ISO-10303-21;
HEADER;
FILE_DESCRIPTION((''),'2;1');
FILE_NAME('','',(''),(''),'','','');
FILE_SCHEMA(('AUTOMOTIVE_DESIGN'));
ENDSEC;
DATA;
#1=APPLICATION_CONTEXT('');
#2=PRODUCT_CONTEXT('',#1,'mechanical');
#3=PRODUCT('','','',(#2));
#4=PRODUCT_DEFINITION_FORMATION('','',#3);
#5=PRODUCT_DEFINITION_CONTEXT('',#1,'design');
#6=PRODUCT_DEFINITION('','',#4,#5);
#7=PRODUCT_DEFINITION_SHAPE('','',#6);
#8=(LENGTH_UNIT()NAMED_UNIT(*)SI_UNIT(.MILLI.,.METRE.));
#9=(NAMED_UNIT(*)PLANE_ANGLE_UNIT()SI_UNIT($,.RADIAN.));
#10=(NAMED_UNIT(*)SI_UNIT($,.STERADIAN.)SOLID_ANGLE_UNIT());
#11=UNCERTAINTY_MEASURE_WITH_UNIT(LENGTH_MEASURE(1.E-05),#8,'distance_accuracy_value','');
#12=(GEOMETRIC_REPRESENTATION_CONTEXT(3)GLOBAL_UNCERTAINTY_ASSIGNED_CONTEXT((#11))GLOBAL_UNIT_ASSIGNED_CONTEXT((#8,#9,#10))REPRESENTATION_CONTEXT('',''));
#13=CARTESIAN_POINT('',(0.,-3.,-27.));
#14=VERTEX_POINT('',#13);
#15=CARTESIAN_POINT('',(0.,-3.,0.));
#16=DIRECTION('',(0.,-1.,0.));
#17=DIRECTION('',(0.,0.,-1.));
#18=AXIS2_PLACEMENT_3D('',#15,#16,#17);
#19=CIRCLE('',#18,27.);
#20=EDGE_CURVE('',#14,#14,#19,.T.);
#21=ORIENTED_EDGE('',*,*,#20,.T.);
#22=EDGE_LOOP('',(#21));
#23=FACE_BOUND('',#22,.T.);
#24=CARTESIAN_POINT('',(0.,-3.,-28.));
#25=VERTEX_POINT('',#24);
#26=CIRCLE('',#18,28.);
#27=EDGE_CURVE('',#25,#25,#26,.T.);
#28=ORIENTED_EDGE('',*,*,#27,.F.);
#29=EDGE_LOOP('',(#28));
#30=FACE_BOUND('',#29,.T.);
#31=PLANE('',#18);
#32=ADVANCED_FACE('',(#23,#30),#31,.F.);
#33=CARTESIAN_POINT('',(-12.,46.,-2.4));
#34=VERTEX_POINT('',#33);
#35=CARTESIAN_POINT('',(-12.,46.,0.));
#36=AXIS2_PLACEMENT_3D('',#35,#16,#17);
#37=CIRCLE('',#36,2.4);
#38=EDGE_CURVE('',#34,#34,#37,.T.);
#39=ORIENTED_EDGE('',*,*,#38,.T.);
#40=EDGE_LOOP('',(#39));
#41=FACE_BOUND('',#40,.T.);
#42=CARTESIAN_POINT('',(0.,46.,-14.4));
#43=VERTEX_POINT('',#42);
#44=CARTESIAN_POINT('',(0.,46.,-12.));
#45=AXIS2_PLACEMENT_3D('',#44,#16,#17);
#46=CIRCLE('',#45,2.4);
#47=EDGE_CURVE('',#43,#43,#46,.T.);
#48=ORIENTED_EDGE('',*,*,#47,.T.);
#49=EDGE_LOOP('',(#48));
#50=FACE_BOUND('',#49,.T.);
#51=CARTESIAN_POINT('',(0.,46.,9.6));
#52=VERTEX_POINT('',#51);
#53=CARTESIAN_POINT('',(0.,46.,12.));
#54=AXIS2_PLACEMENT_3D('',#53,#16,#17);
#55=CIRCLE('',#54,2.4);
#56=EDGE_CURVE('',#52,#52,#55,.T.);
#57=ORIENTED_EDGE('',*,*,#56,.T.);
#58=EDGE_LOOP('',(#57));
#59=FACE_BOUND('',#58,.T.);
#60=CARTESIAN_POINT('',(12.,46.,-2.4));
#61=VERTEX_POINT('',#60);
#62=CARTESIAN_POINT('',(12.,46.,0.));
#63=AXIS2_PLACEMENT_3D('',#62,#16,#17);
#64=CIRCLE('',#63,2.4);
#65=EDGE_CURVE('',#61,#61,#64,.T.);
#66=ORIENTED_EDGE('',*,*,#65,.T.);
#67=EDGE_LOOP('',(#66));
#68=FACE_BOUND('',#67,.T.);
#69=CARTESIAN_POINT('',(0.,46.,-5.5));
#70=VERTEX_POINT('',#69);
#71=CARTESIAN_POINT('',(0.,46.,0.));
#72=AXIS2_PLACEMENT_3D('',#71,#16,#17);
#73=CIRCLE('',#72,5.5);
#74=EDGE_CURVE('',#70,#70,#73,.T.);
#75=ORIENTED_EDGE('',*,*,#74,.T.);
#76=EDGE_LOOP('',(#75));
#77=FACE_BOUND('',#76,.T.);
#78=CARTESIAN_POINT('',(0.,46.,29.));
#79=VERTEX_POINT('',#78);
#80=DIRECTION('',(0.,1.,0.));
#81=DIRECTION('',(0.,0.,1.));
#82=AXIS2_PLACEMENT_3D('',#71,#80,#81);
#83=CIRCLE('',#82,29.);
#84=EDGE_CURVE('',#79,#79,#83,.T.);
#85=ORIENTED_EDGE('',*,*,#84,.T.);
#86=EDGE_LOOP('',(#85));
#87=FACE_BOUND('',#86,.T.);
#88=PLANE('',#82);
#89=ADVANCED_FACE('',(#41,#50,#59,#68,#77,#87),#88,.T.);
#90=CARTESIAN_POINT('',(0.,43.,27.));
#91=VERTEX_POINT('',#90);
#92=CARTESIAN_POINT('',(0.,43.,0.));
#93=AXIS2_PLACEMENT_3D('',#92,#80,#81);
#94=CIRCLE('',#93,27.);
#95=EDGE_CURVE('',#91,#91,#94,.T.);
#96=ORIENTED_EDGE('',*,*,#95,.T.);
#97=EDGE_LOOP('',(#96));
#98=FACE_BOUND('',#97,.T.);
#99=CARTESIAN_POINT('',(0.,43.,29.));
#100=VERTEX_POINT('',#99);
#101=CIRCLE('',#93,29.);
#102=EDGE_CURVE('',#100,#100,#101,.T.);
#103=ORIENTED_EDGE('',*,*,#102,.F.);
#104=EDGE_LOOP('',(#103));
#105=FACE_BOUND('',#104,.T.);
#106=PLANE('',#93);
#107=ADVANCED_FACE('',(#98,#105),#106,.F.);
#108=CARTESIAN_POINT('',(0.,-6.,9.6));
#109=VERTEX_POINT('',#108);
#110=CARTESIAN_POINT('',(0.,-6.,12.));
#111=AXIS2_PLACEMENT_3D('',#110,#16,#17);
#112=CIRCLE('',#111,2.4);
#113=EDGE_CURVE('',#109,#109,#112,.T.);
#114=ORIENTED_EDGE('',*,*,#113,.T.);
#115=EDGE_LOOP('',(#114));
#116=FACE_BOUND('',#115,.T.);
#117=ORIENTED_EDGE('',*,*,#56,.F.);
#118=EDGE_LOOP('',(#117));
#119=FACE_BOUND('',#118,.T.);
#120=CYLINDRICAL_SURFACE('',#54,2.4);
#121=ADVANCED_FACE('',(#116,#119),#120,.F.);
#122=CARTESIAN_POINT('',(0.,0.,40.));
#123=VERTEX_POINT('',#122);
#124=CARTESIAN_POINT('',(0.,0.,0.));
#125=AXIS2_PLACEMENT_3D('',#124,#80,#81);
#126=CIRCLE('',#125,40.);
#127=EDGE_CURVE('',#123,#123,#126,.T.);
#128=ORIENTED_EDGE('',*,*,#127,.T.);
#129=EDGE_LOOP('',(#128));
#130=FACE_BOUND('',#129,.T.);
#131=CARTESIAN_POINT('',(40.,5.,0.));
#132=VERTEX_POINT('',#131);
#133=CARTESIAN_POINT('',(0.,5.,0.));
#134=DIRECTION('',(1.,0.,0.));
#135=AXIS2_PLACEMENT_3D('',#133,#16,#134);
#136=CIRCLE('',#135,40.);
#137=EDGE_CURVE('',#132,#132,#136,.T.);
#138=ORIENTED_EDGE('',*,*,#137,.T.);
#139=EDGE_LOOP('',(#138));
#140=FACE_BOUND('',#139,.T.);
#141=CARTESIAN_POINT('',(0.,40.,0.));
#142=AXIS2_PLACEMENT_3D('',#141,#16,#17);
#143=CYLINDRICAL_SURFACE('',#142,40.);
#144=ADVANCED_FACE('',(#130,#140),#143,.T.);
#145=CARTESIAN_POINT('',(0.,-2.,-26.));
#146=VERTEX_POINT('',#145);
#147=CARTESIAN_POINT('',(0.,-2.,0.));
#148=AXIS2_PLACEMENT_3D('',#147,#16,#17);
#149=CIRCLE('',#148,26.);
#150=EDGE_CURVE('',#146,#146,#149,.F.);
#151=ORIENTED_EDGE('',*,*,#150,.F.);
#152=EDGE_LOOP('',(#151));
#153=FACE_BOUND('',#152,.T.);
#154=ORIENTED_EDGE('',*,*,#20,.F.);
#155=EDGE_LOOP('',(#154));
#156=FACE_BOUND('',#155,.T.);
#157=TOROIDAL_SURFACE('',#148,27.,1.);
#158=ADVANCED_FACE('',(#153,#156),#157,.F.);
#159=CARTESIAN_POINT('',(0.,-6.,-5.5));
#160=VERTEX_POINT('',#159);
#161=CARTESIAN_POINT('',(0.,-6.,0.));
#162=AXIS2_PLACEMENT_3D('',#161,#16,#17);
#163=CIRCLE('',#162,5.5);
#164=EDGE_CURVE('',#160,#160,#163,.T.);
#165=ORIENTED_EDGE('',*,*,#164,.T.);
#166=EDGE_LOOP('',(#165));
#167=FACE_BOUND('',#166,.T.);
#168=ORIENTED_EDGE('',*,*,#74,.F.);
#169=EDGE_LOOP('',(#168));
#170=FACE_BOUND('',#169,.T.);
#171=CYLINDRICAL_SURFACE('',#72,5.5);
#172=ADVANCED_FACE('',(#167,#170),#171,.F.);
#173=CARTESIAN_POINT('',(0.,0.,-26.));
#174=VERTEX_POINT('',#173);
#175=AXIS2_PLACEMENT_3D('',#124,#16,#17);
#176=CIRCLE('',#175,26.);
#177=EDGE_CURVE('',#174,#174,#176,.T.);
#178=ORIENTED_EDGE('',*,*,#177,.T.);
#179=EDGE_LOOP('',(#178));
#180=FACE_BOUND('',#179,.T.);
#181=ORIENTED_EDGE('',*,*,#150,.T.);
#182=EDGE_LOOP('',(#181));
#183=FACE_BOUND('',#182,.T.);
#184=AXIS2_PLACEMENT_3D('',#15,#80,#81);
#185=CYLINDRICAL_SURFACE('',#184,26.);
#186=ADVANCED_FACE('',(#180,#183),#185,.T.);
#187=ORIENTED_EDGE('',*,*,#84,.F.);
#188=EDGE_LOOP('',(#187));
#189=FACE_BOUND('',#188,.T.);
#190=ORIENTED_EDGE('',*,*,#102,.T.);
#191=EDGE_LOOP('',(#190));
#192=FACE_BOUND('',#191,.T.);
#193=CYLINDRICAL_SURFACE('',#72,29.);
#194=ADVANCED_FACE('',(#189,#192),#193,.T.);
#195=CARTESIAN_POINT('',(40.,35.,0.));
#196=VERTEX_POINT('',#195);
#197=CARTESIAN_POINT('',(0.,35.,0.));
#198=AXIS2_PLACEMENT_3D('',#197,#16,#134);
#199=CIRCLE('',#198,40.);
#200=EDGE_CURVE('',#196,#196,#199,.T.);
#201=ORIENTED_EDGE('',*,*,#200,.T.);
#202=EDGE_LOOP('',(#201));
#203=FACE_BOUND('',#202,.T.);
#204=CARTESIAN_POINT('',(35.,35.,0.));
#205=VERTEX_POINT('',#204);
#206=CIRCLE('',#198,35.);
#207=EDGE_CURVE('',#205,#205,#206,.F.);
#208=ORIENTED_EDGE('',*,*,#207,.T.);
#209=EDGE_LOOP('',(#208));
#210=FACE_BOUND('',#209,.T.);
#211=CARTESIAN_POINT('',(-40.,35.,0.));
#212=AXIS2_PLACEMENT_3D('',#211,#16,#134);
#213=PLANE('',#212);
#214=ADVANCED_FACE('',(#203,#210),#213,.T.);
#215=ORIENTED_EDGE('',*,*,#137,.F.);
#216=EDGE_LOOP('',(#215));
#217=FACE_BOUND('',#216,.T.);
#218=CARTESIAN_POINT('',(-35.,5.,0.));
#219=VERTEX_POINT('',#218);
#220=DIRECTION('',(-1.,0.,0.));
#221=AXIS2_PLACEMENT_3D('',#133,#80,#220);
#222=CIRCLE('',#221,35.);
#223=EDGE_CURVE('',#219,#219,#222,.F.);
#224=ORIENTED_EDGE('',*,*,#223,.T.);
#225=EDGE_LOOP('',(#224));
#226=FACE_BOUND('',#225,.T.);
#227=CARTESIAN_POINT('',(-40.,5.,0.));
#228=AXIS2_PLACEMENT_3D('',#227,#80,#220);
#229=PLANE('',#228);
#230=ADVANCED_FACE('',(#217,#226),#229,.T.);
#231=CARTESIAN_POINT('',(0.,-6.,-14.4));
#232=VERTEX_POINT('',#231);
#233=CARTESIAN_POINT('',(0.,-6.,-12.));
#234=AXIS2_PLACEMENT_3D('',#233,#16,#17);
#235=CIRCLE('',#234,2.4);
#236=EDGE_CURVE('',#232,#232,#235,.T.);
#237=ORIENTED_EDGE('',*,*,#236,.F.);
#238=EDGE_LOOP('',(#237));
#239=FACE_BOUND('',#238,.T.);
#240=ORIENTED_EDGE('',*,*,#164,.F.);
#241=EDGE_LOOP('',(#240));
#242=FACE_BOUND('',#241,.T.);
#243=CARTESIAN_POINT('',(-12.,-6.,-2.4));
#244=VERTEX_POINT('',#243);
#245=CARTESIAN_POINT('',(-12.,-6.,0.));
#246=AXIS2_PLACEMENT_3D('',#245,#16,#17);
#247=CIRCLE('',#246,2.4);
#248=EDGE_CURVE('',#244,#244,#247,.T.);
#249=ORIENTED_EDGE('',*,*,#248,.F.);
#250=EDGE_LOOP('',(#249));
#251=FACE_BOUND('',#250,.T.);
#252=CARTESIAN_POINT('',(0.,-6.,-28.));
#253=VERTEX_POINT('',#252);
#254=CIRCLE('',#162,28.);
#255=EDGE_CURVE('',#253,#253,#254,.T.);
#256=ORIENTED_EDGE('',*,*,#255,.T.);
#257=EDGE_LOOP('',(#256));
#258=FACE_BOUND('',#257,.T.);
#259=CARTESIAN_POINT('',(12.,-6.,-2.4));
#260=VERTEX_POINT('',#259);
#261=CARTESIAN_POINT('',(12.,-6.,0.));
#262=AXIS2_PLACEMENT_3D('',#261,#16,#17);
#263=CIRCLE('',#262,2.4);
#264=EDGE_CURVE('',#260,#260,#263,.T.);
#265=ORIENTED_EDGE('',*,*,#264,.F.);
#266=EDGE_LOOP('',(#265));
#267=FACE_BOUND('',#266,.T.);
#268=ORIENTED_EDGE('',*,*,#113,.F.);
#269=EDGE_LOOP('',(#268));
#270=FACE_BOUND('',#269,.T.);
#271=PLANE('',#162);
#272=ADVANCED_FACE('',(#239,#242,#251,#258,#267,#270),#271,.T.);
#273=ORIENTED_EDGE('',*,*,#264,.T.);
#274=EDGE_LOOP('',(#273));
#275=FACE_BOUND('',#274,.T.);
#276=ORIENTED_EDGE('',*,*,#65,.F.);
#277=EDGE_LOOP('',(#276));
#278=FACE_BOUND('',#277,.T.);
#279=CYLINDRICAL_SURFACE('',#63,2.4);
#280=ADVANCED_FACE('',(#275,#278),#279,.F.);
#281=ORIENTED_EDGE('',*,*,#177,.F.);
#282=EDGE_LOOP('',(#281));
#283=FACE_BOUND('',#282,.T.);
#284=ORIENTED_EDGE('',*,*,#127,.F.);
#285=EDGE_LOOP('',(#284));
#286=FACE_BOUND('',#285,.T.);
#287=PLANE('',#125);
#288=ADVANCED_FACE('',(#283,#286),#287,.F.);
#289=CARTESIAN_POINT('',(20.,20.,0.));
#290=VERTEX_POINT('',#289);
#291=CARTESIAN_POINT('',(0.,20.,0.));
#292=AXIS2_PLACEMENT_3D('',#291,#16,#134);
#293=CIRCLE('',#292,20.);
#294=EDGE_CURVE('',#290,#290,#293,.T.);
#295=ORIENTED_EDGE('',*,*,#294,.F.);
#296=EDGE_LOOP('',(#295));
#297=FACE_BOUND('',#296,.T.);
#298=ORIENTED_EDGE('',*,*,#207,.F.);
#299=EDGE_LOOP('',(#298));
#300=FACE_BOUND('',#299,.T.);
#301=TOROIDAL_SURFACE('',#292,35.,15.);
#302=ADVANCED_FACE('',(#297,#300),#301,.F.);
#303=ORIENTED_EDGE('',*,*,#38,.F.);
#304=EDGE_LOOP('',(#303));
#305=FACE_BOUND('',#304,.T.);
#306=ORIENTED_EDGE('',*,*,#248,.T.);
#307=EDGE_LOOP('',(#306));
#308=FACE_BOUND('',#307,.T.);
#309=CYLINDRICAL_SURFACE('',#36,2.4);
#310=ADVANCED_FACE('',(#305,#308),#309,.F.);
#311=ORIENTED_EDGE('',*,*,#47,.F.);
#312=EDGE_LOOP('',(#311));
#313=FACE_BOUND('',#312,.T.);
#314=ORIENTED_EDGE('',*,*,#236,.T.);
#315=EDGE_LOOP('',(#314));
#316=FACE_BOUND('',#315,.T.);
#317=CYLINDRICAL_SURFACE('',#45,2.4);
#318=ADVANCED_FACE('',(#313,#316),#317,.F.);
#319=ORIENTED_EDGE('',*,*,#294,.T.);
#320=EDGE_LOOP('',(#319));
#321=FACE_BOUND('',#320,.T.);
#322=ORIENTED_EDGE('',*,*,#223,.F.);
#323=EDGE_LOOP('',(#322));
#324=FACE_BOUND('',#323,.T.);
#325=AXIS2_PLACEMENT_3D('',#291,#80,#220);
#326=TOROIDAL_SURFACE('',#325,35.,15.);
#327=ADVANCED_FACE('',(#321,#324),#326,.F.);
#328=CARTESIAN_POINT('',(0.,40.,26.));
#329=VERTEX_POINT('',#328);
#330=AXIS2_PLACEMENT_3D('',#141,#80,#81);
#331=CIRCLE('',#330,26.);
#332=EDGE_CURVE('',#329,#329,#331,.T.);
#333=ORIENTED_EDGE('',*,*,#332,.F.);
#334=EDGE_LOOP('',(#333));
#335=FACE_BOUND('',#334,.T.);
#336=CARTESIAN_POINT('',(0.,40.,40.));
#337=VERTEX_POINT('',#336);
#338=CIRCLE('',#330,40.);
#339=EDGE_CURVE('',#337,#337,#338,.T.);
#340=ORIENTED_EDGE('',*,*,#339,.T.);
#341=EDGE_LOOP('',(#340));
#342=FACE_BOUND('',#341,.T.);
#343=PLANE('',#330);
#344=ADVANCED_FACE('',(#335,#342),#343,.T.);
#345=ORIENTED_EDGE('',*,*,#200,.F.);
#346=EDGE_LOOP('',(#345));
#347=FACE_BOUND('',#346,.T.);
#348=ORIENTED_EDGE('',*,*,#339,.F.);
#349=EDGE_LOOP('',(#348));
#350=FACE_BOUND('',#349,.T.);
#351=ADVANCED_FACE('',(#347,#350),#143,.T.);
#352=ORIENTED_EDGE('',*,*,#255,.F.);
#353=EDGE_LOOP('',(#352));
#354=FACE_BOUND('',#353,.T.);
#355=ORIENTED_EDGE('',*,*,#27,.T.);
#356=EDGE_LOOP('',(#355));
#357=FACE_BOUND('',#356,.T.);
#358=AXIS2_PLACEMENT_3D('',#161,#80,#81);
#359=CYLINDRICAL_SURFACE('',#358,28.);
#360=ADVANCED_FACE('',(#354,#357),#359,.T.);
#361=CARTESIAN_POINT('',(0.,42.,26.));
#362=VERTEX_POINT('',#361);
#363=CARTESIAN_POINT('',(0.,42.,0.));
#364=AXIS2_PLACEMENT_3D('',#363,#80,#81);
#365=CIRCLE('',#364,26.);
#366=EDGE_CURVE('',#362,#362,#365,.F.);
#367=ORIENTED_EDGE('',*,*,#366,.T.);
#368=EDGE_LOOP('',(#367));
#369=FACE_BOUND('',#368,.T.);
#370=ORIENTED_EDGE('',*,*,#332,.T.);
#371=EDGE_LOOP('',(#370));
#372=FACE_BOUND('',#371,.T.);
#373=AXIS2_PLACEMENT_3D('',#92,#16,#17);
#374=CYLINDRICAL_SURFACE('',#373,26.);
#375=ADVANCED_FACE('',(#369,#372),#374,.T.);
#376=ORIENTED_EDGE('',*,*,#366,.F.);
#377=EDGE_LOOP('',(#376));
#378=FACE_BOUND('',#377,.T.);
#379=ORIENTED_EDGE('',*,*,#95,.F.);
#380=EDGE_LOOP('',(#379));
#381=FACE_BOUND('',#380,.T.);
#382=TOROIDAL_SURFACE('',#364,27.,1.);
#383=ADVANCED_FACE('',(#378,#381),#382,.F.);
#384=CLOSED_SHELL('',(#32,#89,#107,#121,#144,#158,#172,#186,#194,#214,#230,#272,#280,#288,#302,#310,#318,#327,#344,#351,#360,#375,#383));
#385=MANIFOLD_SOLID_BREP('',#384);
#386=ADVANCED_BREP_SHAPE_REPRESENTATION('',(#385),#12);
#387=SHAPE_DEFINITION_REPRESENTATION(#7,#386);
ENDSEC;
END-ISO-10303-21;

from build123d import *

# Parameters (mm, degrees)
SKETCH_1_R          = 40
EXTRUDE_1_DEPTH     = 40
SKETCH_2_R          = 26
EXTRUDE_2_DEPTH     = 3
SKETCH_3_R          = 29
EXTRUDE_3_DEPTH     = 3
FILLET_1_R          = 1
EXTRUDE_START       = 3
SKETCH_4_R          = 26
EXTRUDE_4_DEPTH     = 3
SKETCH_5_R          = 28
EXTRUDE_5_DEPTH     = 3
FILLET_2_R          = 1
SKETCH_6_W          = 20
SKETCH_6_H          = 30
FILLET_5_R          = 15
SKETCH_7_R          = 5.5
CUT_EXTRUDE_1_DEPTH = 77.837490849
SKETCH_8_R          = 2.4
CUT_EXTRUDE_2_DEPTH = 77.837490849


with BuildPart() as part:
    # 草图1 → 凸台-拉伸1 (new body)
    with BuildSketch(Plane(origin=(0, 0, 0), x_dir=(1, 0, 0), z_dir=(0, 1, 0))):
        with Locations(Location((0, 0, 0), (0, 0, 270))):
            Circle(SKETCH_1_R)
    extrude(amount=EXTRUDE_1_DEPTH)

    # 草图2 → 凸台-拉伸2 (add)
    with BuildSketch(Plane(origin=(0, 40, 0), x_dir=(1, 0, 0), z_dir=(0, 1, 0))):
        with Locations(Location((0, 0, 0), (0, 0, 270))):
            Circle(SKETCH_2_R)
    extrude(amount=EXTRUDE_2_DEPTH)

    # 草图3 → 凸台-拉伸3 (add)
    with BuildSketch(Plane(origin=(0, 43, 0), x_dir=(1, 0, 0), z_dir=(0, 1, 0))):
        with Locations(Location((0, 0, 0), (0, 0, 270))):
            Circle(SKETCH_3_R)
    extrude(amount=EXTRUDE_3_DEPTH)

    # 圆角1
    fillet_1_edges = [part.edges().sort_by_distance(p)[0] for p in [
        (0, 43, -26),
    ]]
    fillet(fillet_1_edges, radius=FILLET_1_R)

    # 草图4 → 凸台-拉伸4 (add)
    with BuildSketch(Plane.XZ.offset(EXTRUDE_START)):
        with Locations(Location((0, 0, 0), (0, 0, 90))):
            Circle(SKETCH_4_R)
    extrude(amount=-EXTRUDE_4_DEPTH)

    # 草图5 → 凸台-拉伸5 (add)
    with BuildSketch(Plane.XZ.offset(3)):
        with Locations(Location((0, 0, 0), (0, 0, 270))):
            Circle(SKETCH_5_R)
    extrude(amount=EXTRUDE_5_DEPTH)

    # 圆角2
    fillet_2_edges = [part.edges().sort_by_distance(p)[0] for p in [
        (0, -3, -26),
    ]]
    fillet(fillet_2_edges, radius=FILLET_2_R)

    # 草图6 → 切除-旋转1 (revolve, cut)
    with BuildSketch(Plane.XY, mode=Mode.PRIVATE) as cut_revolve_1_sk:
        with Locations((-30, 20)):
            Rectangle(SKETCH_6_W, SKETCH_6_H)
    revolve(cut_revolve_1_sk.sketch.rotate(Axis((0, -960, 0), (0, 1, 0)), 180), axis=Axis((0, -960, 0), (0, 1, 0)), mode=Mode.SUBTRACT)

    # 圆角5
    fillet_5_edges = [part.edges().sort_by_distance(p)[0] for p in [
        (-20, 5, 0),
        (-20, 35, 0),
    ]]
    fillet(fillet_5_edges, radius=FILLET_5_R - 0.0001)  # a hair under: the kernel refuses the full size

    # 草图7 → 切除-拉伸1 (cut, through all)
    with BuildSketch(Plane.XZ.offset(6)):
        with Locations(Location((0, 0, 0), (0, 0, 270))):
            Circle(SKETCH_7_R)
    extrude(amount=-CUT_EXTRUDE_1_DEPTH, mode=Mode.SUBTRACT)

    # 草图8 → 切除-拉伸2 (cut, through all)
    with BuildSketch(Plane.XZ.offset(6)):
        with Locations(Location((0, 12, 0), (0, 0, 270))):
            Circle(SKETCH_8_R)
        with Locations(Location((12, 0, 0), (0, 0, 270))):
            Circle(SKETCH_8_R)
        with Locations(Location((0, -12, 0), (0, 0, 270))):
            Circle(SKETCH_8_R)
        with Locations(Location((-12, 0, 0), (0, 0, 270))):
            Circle(SKETCH_8_R)
    extrude(amount=-CUT_EXTRUDE_2_DEPTH, mode=Mode.SUBTRACT)


solid = part.part
